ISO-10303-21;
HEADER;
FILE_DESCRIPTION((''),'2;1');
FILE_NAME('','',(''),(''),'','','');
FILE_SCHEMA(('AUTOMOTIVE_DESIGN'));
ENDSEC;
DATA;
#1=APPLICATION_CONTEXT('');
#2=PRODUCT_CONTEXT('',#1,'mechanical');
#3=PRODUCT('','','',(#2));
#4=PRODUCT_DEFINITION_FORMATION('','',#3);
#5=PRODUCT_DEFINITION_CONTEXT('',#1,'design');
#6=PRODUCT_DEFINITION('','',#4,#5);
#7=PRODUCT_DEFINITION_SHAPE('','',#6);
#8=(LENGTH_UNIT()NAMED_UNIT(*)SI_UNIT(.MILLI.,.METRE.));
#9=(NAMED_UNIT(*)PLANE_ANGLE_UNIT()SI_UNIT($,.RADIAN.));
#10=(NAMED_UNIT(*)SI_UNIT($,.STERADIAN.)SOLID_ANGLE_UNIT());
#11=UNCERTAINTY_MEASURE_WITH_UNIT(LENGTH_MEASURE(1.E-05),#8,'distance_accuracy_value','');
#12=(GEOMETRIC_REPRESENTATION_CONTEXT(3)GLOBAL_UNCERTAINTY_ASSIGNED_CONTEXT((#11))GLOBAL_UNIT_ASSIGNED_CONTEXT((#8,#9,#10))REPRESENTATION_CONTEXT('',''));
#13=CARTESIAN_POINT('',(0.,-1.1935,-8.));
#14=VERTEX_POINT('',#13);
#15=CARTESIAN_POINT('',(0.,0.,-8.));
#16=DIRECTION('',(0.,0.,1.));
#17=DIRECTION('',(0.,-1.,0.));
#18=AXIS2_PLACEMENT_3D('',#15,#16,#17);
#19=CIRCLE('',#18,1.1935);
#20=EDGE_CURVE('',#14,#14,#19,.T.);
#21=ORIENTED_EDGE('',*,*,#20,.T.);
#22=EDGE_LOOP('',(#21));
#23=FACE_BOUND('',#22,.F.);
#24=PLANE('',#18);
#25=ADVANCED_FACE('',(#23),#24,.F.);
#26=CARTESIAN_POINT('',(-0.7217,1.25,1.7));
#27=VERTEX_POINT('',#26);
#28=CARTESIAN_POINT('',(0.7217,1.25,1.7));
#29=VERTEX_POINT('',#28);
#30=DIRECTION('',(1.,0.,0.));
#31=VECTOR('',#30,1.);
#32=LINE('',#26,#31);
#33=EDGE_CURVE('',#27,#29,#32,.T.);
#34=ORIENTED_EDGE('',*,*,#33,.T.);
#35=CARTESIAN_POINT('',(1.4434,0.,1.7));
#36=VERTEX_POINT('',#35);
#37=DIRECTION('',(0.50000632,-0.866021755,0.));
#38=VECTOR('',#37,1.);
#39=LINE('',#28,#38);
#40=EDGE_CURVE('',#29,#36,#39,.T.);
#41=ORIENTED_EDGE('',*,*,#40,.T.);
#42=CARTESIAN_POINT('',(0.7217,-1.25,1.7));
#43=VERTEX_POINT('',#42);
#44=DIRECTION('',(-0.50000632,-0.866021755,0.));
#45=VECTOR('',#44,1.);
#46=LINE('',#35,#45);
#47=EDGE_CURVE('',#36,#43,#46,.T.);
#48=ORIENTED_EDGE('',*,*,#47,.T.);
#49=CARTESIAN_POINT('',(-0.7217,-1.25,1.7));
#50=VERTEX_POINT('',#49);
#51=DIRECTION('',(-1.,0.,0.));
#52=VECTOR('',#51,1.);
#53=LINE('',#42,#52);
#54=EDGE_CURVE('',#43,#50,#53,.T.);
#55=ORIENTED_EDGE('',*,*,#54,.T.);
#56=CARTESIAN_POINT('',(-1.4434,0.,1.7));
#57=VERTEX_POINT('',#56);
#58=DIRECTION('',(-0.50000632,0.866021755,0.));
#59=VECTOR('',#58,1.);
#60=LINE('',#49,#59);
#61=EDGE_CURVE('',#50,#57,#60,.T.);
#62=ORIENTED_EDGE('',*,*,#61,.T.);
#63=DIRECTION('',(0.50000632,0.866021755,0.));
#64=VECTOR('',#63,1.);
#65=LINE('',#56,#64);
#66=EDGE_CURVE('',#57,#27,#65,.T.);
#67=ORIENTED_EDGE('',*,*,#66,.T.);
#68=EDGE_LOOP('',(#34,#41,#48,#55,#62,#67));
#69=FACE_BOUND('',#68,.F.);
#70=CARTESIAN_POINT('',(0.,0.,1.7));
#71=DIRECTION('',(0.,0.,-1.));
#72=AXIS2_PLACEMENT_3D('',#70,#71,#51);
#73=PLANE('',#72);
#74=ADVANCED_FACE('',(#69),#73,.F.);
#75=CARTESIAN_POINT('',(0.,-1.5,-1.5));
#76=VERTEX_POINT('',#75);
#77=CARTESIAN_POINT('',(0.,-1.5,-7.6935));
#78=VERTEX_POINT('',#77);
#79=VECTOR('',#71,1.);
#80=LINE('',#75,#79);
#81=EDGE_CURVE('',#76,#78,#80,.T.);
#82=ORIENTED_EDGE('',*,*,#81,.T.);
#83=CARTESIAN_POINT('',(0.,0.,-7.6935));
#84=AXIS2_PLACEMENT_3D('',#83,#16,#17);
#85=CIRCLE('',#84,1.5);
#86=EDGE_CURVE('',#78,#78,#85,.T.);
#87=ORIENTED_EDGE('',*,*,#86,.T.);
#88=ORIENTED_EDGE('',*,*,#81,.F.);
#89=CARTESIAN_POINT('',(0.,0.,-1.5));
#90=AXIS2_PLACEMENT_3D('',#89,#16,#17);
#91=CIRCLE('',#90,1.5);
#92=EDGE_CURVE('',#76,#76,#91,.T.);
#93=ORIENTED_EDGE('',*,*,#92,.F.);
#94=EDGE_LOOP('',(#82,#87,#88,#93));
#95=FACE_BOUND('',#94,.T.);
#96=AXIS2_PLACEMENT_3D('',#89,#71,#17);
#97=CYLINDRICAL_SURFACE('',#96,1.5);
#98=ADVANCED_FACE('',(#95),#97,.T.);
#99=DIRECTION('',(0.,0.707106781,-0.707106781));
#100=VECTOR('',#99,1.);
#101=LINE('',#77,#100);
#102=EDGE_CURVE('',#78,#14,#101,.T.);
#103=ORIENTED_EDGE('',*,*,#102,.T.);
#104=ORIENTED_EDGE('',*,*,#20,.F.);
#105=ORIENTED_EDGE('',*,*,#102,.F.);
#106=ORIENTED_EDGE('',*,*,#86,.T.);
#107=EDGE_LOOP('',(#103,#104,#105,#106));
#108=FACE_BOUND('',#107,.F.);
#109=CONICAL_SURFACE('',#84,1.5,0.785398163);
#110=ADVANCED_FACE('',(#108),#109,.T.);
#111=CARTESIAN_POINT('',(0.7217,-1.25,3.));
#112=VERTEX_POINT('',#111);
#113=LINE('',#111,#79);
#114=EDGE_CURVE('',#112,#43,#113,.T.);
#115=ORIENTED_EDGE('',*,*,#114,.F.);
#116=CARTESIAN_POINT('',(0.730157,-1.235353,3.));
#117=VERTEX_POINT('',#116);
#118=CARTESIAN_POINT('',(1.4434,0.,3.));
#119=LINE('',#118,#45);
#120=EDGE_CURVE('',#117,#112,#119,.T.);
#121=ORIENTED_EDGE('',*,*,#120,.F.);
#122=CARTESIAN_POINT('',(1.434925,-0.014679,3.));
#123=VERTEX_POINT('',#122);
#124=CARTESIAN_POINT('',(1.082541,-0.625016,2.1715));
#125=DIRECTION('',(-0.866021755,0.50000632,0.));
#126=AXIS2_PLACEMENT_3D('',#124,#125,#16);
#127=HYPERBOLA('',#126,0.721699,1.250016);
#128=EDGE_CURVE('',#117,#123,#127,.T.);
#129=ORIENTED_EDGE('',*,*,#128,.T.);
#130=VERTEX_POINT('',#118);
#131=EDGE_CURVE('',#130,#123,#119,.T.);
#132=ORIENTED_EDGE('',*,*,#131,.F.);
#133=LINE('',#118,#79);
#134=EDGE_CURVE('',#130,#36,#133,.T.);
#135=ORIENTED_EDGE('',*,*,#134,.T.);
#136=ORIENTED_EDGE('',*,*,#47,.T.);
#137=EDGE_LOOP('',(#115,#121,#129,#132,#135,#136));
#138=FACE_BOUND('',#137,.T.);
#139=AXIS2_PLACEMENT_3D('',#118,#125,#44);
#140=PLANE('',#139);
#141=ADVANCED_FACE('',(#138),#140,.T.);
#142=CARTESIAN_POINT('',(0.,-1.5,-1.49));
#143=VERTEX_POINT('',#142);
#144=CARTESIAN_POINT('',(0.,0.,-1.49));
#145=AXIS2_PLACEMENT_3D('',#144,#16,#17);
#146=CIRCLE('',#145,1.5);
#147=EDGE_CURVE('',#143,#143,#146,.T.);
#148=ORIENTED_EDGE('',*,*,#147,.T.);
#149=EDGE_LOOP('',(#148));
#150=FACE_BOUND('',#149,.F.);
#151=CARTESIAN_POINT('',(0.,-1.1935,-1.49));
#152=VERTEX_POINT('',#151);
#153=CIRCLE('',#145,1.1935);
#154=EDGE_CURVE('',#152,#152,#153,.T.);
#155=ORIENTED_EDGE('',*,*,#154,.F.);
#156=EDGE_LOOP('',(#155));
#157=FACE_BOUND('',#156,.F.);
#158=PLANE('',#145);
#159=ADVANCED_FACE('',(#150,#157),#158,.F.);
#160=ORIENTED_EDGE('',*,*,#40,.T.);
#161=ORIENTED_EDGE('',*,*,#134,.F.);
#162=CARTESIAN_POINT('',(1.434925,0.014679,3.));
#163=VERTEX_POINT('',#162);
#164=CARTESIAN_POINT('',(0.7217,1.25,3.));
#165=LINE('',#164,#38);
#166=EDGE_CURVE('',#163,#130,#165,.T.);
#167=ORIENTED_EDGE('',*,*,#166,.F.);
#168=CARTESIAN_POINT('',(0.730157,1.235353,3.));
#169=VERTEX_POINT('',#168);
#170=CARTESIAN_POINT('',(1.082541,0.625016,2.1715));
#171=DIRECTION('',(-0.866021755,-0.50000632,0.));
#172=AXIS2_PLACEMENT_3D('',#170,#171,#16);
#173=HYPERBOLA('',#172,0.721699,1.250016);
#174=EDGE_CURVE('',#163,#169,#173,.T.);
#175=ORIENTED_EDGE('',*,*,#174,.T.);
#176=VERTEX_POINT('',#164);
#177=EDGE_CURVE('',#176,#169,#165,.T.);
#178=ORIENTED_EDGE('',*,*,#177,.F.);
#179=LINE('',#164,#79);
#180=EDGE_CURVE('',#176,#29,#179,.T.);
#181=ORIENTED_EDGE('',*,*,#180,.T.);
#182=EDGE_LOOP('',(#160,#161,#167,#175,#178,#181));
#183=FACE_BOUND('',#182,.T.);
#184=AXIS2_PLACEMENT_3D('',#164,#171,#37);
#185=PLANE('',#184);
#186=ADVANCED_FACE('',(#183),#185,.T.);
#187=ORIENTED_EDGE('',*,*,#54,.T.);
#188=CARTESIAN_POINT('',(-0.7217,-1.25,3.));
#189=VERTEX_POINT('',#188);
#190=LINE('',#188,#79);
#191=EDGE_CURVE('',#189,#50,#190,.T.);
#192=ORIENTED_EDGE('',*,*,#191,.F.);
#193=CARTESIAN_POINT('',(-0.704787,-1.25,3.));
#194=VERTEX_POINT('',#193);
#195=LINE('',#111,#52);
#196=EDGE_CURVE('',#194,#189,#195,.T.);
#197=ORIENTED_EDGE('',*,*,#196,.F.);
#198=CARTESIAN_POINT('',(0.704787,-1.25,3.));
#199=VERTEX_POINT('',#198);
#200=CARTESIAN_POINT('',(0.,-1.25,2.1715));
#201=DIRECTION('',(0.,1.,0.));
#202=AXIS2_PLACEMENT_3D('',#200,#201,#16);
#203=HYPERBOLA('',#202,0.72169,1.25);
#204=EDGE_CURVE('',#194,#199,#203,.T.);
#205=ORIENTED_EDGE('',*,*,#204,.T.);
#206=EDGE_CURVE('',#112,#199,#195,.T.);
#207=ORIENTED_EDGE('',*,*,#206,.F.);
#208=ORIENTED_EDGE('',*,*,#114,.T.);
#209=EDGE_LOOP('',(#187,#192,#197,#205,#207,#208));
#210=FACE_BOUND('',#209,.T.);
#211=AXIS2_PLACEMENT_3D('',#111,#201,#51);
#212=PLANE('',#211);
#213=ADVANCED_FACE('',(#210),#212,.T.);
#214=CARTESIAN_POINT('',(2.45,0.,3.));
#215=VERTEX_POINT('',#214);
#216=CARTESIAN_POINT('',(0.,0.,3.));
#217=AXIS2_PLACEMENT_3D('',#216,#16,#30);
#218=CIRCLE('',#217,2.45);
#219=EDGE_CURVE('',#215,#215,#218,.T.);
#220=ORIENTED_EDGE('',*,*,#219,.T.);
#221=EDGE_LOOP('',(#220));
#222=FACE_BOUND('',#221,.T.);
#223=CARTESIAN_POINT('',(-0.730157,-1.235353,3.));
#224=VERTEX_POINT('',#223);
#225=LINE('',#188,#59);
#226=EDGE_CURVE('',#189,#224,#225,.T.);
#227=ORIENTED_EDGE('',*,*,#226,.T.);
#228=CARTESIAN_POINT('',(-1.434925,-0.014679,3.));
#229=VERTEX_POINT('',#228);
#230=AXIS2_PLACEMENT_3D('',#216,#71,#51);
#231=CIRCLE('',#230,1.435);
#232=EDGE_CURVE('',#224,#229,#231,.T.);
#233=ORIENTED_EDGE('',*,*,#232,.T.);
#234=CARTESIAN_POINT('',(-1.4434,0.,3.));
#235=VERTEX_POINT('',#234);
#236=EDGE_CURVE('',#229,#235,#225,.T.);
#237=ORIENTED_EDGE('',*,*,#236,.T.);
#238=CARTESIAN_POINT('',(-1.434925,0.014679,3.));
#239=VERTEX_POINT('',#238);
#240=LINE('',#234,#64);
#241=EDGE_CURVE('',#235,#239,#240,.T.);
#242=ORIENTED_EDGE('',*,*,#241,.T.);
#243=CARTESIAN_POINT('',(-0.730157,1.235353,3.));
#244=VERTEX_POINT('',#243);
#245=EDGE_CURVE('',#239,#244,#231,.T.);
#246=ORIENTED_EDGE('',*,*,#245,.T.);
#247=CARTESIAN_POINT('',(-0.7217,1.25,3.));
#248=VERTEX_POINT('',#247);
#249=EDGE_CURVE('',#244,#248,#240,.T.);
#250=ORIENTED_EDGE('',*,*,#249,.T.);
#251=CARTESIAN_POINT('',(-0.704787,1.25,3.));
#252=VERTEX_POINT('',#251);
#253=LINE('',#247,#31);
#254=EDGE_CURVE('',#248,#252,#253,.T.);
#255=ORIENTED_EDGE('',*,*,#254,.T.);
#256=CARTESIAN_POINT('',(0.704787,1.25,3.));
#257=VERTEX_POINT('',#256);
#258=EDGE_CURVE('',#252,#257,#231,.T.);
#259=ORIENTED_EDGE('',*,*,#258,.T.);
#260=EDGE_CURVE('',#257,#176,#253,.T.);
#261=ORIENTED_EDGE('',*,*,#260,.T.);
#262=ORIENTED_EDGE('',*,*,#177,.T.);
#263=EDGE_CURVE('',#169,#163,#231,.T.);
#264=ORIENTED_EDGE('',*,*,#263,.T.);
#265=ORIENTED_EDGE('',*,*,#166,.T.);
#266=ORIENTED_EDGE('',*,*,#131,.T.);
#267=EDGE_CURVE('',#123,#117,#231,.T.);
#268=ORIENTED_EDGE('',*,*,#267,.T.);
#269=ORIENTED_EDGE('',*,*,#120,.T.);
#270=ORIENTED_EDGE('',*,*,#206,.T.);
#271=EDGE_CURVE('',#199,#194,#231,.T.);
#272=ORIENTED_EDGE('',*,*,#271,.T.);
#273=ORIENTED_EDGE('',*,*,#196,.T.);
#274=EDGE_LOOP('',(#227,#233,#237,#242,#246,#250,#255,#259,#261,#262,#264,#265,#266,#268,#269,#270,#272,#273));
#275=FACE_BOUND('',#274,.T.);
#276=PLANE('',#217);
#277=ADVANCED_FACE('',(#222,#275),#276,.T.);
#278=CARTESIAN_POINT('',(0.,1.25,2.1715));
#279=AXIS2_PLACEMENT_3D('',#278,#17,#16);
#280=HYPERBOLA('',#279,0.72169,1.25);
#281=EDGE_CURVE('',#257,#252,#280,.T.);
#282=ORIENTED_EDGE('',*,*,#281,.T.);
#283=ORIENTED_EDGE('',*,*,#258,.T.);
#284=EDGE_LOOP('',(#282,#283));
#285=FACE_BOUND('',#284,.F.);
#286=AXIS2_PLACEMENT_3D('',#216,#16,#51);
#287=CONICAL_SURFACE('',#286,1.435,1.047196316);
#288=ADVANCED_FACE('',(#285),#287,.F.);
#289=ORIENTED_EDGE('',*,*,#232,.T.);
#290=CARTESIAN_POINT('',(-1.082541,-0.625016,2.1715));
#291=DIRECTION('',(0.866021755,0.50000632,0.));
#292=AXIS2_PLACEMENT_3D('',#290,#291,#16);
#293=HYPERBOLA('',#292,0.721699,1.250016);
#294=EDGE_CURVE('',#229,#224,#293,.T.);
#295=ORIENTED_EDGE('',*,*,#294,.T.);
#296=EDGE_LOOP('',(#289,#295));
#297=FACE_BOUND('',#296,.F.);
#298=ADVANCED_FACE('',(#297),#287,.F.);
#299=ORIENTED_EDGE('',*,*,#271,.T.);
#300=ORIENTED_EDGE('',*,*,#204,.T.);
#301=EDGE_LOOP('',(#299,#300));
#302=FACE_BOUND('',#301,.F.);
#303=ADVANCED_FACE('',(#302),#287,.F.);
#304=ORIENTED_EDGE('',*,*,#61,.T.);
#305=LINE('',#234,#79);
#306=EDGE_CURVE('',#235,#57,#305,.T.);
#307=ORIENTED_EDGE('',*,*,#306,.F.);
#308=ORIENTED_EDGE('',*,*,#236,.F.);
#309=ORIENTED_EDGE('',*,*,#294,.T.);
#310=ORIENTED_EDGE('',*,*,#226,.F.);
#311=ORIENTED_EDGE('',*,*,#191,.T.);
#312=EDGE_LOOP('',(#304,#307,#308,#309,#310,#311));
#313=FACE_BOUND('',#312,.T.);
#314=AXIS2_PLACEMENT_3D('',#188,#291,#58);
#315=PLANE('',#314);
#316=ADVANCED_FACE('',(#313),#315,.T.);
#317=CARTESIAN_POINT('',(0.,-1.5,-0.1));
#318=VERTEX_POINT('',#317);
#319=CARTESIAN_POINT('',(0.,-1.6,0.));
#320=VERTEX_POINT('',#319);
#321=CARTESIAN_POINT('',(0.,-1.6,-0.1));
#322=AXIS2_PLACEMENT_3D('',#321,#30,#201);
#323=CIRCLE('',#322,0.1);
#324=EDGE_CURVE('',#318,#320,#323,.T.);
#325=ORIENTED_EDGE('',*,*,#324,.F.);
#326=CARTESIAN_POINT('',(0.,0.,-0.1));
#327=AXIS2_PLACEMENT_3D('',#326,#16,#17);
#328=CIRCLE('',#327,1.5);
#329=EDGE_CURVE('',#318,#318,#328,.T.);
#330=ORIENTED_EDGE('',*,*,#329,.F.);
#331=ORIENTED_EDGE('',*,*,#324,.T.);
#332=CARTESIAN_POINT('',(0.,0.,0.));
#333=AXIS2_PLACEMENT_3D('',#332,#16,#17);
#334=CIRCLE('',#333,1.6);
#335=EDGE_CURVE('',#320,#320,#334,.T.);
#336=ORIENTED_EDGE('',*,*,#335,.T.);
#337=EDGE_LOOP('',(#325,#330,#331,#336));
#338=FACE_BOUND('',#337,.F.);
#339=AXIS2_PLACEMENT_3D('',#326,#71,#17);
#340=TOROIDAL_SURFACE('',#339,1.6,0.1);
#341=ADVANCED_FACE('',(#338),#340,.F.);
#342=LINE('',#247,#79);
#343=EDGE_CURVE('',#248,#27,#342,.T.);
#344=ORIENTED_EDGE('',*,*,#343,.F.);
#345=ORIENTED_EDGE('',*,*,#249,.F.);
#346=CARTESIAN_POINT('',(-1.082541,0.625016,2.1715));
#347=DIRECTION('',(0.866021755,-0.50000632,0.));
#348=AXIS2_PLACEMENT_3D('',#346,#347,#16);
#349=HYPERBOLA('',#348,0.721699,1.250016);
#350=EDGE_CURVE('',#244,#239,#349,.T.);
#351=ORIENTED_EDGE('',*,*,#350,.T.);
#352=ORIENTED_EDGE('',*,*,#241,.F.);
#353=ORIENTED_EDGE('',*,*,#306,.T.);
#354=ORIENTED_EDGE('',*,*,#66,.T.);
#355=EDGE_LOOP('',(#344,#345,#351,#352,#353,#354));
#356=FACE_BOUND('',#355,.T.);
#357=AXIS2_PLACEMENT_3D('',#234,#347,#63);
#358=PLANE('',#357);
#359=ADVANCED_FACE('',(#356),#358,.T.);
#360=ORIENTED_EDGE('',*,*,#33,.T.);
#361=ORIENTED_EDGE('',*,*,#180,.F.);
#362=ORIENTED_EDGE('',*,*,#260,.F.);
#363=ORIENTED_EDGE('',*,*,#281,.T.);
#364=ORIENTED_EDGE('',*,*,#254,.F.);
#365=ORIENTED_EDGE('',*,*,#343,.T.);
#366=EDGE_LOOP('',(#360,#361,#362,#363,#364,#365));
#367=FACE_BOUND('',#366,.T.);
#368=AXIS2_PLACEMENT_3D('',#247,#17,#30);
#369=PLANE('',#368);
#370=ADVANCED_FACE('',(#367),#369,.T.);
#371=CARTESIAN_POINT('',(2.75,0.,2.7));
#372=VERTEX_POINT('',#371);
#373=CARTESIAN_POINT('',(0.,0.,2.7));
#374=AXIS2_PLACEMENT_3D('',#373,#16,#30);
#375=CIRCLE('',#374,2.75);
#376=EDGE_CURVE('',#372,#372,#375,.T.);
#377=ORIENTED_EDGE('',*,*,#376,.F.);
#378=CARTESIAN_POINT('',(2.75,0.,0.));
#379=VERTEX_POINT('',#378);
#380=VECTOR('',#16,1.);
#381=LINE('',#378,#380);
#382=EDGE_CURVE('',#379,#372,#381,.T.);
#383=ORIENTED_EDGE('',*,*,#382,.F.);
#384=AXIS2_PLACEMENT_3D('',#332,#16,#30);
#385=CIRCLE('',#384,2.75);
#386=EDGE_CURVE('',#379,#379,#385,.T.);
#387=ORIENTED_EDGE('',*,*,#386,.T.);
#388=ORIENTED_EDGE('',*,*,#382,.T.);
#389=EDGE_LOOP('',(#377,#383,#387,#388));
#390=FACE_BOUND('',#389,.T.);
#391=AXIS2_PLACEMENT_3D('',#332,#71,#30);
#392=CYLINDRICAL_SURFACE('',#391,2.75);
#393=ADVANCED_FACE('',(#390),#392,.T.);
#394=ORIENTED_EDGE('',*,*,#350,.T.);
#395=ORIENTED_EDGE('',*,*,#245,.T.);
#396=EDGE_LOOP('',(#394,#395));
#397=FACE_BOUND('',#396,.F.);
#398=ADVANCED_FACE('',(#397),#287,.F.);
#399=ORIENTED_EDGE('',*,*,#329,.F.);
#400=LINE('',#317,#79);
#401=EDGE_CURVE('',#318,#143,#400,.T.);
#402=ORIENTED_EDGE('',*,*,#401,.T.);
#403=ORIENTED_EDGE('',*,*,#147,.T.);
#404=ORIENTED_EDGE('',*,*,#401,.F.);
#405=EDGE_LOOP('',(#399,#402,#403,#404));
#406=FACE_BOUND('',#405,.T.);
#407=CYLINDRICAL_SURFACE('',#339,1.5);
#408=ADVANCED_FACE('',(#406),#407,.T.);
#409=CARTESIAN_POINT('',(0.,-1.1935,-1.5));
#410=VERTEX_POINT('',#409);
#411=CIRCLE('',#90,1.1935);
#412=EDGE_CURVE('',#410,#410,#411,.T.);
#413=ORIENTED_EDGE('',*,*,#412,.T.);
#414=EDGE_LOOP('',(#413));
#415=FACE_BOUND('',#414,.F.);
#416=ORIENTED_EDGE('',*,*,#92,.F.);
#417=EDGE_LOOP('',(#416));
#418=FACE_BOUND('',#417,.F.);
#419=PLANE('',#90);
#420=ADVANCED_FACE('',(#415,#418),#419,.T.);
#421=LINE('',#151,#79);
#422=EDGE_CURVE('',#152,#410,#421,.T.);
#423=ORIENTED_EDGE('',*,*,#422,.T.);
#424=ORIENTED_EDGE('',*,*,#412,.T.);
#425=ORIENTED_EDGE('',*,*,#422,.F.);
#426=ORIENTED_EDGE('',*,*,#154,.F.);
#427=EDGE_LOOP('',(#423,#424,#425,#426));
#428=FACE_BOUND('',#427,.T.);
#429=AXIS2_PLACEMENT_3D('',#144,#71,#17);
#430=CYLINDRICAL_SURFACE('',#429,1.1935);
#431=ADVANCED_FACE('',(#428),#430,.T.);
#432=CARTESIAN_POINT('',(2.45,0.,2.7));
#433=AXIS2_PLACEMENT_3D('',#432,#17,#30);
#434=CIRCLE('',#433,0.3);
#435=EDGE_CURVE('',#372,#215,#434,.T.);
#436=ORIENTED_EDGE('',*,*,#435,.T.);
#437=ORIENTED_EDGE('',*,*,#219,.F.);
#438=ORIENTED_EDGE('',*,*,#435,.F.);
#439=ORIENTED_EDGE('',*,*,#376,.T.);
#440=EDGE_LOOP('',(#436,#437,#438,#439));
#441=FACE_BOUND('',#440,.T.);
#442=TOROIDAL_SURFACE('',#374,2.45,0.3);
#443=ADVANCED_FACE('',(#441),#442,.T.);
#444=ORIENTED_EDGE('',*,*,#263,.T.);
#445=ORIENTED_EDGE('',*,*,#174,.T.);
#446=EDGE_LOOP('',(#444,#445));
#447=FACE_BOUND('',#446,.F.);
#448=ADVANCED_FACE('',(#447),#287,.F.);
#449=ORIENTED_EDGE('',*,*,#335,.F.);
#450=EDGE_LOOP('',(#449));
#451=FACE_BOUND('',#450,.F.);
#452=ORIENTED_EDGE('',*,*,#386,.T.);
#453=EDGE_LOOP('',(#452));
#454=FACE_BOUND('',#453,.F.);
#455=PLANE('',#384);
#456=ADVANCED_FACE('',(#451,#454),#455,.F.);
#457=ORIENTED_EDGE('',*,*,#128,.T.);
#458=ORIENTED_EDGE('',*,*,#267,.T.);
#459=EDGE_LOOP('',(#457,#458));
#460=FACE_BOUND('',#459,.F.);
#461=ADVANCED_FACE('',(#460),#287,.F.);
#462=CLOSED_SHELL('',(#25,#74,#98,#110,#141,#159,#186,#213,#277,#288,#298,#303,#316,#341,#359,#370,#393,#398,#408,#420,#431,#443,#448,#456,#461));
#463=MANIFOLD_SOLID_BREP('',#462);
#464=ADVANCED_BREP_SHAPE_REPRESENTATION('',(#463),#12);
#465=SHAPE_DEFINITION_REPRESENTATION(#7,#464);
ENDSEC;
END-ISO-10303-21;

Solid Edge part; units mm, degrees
sketch "Sketch1" plane through (0, 0, 0) normal (0, 0, 1) x (1, 0, 0)
  circle A0 centre (0, 0) radius 2.75
extrude "Protrusion1" add sketch "Sketch1" along normal blind 3
sketch "Sketch2" plane through (0, 0, 3) normal (0, 0, 1) x (0, 1, 0)
  line L0 (0, 1.4434) -> (1.25, 0.7217)
  line L1 (1.25, 0.7217) -> (1.25, -0.7217)
  line L2 (1.25, -0.7217) -> (0, -1.4434)
  line L3 (0, -1.4434) -> (-1.25, -0.7217)
  line L4 (-1.25, -0.7217) -> (-1.25, 0.7217)
  line L5 (-1.25, 0.7217) -> (0, 1.4434)
extrude "Cutout1" cut sketch "Sketch2" against normal blind 1.3
fillet "Round1" radius 0.3 1 edges at (-2.75, 0, 3)
sketch "Sketch3" plane through (0, 0, 0) normal (1, 0, 0) x (0, 1, 0)
  line L0 (-1.1935, -8) -> (0, -8)
  line L1 (-1.5, -7.6935) -> (-1.1935, -8)
  line L2 (-1.5, -1.5) -> (-1.5, -7.6935)
  line L3 (-1.1935, -1.5) -> (-1.5, -1.5)
  line L4 (-1.1935, -1.49) -> (-1.1935, -1.5)
  line L5 (-1.5, -1.49) -> (-1.1935, -1.49)
  line L6 (-1.5, -0.1) -> (-1.5, -1.49)
  arc A0 (-1.5, -0.1) -> (-1.6, 0) centre (-1.6, -0.1) ccw
  dimension "D1" = 1.5
  dimension "D2" = 0.01
  dimension "D3" = 0.1
  dimension "D4" = 8
revolve "RevolvedProtrusion1" add sketch "Sketch3" angle 360 about axis through (0, 0, -60.325) along (0, 0, 1) material side at (0, -0.5968, -7.95)
cosmetic_thread "Thread1"
sketch "Sketch4" plane through (0, 0, 0) normal (0, -1, 0) x (1, 0, 0)
  line L0 (-1.435, 3) -> (0, 2.1715)
revolve "RevolvedCutout1" cut sketch "Sketch4" angle 360 about axis through (0, 0, 57.15) along (0, 0, -1) material side at (-0.6925, 0, 2.6291)
properties material "Steel"
